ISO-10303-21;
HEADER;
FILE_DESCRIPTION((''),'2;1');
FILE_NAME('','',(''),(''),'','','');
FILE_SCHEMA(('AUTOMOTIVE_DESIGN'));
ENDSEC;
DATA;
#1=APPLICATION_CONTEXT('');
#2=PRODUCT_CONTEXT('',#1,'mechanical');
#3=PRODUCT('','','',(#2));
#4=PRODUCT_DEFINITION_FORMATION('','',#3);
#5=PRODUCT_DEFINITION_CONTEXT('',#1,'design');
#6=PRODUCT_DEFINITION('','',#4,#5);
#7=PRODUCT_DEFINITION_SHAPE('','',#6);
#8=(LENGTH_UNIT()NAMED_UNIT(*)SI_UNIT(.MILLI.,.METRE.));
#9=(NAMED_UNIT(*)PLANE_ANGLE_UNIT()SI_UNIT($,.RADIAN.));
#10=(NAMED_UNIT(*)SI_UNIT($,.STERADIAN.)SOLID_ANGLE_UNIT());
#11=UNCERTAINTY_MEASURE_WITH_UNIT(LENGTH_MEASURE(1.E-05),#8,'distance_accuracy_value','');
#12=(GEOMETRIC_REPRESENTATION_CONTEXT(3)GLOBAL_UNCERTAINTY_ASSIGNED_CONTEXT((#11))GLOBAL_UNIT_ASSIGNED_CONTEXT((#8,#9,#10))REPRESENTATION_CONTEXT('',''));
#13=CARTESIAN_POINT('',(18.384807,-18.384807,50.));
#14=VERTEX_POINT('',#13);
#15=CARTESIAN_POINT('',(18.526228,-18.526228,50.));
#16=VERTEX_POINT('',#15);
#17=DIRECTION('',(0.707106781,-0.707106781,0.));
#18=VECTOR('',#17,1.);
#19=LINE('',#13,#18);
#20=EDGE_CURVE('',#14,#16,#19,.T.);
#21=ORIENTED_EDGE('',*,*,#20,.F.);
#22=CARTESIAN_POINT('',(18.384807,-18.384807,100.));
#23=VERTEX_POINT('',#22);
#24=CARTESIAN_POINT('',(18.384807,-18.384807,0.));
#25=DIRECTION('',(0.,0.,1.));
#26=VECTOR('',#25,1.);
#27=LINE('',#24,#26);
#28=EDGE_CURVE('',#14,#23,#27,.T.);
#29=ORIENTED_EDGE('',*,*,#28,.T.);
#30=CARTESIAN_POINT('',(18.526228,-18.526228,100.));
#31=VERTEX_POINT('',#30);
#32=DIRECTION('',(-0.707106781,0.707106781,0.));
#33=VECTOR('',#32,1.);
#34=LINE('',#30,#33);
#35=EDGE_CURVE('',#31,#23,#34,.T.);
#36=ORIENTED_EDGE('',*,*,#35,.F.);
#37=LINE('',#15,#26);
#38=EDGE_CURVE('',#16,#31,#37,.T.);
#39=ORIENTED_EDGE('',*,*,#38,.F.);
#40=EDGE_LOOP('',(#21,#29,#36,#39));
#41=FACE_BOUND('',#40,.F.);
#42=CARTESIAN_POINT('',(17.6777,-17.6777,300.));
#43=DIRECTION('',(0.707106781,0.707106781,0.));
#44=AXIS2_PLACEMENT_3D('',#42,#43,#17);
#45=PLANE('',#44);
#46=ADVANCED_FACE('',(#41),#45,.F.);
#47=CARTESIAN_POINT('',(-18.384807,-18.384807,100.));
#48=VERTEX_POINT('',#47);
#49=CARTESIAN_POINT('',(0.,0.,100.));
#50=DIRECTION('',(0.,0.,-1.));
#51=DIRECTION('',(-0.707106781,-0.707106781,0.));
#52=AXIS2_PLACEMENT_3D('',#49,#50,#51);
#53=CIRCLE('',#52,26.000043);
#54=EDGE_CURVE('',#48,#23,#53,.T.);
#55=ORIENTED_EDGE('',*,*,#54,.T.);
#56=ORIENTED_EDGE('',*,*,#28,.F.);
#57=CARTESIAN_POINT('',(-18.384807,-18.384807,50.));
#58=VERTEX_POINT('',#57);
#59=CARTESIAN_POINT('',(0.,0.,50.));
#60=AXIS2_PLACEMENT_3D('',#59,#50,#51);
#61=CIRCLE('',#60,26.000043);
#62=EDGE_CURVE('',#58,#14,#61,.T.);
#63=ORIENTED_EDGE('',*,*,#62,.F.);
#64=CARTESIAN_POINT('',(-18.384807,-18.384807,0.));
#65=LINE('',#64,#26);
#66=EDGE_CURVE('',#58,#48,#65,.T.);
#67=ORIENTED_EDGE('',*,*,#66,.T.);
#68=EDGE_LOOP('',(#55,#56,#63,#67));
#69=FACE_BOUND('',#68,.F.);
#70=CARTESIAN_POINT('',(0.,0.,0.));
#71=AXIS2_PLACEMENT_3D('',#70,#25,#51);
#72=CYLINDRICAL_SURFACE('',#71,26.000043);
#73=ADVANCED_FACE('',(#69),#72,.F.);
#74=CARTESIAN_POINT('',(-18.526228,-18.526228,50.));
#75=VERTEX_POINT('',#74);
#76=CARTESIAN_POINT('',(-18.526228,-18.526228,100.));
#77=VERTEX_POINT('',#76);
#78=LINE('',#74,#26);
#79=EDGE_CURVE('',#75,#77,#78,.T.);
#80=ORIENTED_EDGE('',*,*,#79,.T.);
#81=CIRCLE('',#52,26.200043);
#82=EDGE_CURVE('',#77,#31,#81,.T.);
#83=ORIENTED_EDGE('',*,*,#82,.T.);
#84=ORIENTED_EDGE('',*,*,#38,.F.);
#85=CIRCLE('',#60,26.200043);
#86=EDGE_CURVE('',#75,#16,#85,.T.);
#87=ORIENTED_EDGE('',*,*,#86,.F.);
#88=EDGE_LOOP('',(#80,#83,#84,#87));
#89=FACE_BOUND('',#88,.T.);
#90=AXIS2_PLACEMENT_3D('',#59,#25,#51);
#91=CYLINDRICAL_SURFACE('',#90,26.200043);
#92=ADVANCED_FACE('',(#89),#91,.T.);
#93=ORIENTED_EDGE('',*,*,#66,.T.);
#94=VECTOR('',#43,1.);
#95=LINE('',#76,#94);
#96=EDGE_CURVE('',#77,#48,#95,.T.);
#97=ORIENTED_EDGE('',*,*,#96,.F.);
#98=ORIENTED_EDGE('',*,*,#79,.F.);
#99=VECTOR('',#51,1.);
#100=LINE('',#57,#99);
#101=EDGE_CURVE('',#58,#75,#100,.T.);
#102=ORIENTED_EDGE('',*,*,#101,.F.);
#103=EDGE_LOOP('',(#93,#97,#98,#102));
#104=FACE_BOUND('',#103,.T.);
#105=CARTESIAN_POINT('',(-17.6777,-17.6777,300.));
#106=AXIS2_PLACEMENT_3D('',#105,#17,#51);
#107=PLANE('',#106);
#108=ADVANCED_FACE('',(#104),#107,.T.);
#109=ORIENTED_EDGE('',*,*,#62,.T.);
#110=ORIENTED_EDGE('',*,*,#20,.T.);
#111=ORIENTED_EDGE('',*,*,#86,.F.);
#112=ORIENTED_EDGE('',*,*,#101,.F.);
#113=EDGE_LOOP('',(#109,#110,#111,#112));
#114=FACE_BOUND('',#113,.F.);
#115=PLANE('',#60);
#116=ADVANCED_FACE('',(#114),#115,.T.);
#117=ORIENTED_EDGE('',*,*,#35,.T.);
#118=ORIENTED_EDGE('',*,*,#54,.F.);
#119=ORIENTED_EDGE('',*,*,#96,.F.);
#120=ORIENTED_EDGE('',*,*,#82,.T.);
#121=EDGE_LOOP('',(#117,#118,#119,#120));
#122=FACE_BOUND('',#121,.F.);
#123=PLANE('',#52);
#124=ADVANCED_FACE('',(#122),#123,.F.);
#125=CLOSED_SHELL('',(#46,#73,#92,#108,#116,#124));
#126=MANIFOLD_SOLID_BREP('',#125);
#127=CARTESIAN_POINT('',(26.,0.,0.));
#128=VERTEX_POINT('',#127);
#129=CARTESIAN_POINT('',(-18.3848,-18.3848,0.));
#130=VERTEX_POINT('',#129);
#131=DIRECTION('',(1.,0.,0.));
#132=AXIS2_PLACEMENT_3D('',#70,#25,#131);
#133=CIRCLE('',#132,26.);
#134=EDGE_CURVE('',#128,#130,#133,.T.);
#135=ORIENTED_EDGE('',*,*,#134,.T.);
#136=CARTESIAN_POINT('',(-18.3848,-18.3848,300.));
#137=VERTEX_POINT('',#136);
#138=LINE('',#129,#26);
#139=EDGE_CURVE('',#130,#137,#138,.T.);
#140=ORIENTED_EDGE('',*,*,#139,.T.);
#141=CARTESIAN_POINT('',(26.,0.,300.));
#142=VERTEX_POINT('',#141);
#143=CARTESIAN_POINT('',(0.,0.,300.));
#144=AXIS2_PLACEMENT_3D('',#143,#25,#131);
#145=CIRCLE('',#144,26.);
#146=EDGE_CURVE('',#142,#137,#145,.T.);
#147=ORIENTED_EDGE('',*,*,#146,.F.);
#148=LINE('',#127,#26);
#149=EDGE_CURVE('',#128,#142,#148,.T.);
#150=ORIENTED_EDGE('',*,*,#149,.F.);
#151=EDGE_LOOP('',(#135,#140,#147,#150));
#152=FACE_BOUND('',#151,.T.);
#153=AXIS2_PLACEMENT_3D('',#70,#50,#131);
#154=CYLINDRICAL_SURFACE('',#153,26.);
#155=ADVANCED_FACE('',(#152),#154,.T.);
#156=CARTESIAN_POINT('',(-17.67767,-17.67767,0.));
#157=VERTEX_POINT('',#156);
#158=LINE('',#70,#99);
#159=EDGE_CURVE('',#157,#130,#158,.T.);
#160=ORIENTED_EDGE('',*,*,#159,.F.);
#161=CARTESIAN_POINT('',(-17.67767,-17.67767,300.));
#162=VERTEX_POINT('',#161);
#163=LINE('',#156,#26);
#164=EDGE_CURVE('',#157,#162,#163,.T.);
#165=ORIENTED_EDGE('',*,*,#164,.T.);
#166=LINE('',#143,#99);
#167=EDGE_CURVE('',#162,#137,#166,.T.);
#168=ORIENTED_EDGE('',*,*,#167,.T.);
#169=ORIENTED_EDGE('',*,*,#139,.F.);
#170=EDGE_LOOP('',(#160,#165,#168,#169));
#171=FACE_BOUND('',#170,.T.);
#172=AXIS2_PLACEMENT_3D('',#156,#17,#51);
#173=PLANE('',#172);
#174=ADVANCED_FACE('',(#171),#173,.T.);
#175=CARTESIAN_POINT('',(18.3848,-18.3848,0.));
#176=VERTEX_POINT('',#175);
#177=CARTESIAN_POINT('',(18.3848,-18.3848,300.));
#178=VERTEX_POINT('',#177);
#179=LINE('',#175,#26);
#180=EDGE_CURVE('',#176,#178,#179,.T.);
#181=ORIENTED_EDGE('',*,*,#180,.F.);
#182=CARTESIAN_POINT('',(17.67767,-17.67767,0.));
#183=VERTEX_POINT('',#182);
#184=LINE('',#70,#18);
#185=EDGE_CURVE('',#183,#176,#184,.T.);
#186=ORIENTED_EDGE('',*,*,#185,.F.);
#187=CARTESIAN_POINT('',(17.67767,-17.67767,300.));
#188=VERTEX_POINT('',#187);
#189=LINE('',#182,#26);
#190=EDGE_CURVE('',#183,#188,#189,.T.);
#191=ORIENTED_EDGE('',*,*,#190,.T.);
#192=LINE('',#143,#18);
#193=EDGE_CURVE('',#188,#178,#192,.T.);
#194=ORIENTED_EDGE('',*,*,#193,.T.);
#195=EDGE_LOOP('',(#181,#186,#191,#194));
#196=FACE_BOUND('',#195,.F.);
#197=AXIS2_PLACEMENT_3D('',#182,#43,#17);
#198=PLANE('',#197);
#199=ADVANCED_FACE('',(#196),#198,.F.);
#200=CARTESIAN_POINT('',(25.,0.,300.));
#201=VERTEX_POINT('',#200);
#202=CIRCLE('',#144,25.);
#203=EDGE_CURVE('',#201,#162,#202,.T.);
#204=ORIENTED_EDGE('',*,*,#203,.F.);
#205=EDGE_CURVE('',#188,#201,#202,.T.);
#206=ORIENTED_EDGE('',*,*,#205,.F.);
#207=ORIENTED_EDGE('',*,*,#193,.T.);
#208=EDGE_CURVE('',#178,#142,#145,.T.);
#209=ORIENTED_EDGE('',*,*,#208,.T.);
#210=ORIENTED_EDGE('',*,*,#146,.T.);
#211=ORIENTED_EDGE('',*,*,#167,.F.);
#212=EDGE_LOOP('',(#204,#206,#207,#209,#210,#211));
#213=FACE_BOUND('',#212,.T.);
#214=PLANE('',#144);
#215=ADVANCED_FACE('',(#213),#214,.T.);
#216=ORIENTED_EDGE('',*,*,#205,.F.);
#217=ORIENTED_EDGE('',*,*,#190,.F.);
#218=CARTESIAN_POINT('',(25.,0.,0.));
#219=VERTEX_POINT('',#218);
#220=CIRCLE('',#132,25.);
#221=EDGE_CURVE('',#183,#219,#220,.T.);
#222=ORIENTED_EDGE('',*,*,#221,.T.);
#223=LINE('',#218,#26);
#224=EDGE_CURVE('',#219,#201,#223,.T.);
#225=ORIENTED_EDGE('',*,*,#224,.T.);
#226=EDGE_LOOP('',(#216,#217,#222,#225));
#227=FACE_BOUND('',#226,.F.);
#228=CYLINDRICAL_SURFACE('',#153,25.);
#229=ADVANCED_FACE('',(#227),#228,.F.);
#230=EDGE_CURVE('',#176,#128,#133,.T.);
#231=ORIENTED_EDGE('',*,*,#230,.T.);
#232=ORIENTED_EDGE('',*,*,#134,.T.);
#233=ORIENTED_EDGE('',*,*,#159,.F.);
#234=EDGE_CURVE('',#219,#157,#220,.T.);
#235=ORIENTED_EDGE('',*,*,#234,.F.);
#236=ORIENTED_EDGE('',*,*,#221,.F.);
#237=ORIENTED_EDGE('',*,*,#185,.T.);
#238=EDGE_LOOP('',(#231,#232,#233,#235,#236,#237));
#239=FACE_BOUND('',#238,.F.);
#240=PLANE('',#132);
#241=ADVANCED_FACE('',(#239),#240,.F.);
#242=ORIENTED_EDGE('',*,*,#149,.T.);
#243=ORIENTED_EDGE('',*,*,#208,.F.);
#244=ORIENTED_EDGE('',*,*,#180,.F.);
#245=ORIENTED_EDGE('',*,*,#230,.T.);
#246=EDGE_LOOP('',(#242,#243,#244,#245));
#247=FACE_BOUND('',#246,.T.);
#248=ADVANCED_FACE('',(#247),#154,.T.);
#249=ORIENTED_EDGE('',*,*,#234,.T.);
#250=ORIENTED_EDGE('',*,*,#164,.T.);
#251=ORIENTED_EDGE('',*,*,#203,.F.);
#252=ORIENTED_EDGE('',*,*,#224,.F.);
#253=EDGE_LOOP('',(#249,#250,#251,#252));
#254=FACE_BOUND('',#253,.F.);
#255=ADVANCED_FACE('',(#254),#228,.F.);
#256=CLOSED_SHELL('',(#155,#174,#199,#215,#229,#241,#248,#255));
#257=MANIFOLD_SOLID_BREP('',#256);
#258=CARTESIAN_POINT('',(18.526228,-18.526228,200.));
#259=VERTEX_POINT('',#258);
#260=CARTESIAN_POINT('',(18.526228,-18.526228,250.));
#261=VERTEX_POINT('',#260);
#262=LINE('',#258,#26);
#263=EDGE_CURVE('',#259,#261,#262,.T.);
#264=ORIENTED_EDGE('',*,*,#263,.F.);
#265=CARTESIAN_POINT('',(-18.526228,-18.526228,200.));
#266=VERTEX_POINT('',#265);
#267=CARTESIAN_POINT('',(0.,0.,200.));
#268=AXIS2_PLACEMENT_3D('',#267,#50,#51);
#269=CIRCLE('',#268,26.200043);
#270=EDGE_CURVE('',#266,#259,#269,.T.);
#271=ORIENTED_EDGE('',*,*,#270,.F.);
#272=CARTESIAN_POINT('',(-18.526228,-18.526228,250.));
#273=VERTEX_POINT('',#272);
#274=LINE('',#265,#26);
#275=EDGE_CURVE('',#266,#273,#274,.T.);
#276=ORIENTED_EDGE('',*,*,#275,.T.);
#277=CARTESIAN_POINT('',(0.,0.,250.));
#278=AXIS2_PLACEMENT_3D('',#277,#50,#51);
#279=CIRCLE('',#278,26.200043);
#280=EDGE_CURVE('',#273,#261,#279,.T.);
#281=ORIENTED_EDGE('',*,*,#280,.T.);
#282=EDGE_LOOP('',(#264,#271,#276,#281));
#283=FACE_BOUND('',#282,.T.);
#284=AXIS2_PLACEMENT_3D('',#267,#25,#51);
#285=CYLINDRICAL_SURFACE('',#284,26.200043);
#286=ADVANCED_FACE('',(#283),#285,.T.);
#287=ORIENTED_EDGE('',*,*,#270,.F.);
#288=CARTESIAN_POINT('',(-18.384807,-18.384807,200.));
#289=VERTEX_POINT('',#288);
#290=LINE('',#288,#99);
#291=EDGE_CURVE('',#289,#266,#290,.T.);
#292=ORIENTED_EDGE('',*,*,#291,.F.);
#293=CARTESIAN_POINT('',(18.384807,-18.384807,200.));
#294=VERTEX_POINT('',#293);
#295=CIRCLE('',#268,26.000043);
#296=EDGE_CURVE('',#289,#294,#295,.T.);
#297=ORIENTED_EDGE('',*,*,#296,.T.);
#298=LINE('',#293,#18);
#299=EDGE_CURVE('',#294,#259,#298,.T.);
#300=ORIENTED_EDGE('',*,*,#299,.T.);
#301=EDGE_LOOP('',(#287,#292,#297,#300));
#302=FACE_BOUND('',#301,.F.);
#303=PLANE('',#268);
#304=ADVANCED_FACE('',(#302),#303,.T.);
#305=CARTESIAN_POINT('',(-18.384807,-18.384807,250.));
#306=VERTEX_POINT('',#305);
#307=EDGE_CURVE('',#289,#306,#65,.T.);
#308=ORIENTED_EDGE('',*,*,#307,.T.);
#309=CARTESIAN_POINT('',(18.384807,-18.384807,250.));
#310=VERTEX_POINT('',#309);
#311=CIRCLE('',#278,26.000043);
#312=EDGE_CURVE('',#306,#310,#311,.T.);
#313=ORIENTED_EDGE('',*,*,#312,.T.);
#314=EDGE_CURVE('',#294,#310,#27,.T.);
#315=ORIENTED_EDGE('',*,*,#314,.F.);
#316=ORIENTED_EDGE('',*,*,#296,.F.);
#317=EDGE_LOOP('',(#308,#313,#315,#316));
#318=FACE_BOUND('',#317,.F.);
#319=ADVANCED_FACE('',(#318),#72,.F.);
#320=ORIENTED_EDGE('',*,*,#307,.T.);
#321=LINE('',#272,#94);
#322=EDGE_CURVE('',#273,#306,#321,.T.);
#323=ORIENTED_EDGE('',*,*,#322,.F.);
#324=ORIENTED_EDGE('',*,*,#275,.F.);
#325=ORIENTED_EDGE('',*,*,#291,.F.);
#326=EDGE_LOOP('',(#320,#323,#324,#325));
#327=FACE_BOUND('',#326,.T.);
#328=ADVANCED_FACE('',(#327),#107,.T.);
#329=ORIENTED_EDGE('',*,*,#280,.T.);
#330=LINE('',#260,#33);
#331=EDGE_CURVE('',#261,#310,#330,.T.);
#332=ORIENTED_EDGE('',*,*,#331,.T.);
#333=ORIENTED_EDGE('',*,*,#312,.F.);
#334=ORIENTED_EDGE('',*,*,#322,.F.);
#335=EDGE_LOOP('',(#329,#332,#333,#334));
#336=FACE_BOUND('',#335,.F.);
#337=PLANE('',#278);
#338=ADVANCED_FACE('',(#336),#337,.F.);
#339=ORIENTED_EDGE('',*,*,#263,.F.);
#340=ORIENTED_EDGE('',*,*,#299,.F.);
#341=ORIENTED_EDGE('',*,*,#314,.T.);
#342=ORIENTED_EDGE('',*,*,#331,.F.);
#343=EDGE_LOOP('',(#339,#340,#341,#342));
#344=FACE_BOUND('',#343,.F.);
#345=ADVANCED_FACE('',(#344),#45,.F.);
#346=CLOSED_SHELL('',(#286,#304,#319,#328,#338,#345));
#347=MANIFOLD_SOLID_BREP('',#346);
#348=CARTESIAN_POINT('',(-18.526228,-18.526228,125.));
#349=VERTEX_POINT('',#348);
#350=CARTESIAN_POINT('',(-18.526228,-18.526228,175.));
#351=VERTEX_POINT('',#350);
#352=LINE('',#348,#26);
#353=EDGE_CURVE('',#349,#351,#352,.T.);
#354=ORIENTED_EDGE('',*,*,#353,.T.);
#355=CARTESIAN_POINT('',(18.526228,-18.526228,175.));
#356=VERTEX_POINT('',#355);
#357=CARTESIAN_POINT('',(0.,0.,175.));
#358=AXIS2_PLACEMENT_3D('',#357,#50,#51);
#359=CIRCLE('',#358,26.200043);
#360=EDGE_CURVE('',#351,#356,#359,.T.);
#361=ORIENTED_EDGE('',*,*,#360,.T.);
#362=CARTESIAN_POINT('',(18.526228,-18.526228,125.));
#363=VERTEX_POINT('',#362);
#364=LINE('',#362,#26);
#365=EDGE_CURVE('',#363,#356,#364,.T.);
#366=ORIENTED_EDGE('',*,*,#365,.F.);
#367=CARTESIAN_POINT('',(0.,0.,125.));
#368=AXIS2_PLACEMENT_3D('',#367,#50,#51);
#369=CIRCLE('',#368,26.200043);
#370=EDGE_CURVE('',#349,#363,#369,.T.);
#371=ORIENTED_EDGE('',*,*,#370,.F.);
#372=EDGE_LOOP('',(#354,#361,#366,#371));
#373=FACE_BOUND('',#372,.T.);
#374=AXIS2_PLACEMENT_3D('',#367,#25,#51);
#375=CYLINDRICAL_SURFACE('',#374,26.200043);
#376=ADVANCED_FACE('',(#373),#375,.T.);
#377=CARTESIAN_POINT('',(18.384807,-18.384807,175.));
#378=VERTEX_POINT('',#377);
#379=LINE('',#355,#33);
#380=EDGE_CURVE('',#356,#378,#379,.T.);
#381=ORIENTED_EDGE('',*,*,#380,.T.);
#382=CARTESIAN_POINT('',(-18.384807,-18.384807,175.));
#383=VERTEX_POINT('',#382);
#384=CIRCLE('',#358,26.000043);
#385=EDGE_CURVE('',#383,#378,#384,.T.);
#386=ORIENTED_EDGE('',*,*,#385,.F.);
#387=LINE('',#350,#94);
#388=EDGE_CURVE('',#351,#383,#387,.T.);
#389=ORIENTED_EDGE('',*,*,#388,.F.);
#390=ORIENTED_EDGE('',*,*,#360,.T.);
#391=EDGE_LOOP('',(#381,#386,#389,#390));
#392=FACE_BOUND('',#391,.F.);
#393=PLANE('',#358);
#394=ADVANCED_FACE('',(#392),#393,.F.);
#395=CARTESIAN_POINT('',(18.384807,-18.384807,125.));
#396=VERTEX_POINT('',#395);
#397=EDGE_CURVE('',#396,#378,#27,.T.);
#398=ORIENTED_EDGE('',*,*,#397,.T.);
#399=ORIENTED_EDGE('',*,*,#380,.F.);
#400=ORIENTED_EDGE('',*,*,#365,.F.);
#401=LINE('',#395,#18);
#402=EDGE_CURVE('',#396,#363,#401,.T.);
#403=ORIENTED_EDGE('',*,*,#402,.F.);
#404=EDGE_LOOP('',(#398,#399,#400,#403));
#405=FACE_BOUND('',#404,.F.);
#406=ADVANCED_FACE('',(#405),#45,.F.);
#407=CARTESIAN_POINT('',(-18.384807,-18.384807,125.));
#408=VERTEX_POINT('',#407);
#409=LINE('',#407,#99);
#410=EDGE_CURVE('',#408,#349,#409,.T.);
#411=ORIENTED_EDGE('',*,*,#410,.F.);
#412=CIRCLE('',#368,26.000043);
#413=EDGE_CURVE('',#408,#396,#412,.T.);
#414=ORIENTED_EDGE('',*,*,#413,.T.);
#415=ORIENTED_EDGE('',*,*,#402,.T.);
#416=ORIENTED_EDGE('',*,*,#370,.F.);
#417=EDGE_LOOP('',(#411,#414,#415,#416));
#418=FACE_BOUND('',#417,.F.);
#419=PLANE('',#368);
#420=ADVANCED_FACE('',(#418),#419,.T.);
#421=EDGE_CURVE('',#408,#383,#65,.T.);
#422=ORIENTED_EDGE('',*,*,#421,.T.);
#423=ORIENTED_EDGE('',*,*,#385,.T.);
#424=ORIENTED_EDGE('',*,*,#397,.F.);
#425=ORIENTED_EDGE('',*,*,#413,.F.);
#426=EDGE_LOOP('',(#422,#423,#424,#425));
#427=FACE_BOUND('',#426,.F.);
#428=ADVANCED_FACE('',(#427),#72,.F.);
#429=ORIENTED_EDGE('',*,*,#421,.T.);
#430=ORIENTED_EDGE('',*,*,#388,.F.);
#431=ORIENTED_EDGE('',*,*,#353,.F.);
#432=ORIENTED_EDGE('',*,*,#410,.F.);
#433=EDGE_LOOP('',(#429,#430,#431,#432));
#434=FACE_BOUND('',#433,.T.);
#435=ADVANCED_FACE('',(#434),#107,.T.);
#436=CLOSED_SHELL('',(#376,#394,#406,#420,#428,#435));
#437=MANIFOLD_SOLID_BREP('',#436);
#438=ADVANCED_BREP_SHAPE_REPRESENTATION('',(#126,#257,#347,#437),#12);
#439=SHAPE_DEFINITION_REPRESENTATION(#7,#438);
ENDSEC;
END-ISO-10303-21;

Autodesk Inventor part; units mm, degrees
ref_plane "YZ Plane" through (0, 0, 0) normal (1, 0, 0) x (0, 1, 0)
ref_plane "XZ Plane" through (0, 0, 0) normal (0, 1, 0) x (-1, 0, 0)
ref_plane "XY Plane" through (0, 0, 0) normal (0, 0, 1) x (1, 0, 0)
sketch "Base" plane through (0, 0, 0) normal (0, 0, 1) x (1, 0, 0)
  circle A0 centre (0, 0) radius 25
  circle A1 centre (0, 0) radius 26
  line L0 (0, 0) -> (-18.3848, -18.3848)
  line L1 (0, -36.4) -> (0, 36.4) construction
  line L2 (0, 0) -> (18.3848, -18.3848)
  point P0 (17.6777, -17.6777)
  point P1 (18.3848, -18.3848)
  point P2 (-17.6777, -17.6777)
  dimension "d1" = 52
  dimension "d0" = 50
  dimension "d4" = 45
extrude "Corpo" add sketch "Base" along normal blind 300 contours A0 L0 A1 L2 picked at (-19.4545, -16.4764)
sketch "FolhaAluminio" plane through (-17.6777, -17.6777, 300) normal (0.7071068, -0.7071068, 0) x (-0.7071068, -0.7071068, 0)
  line L0 (-51, 300) -> (1, 300) projected
  line L1 (1, 300) -> (1, 250) construction
  line L2 (1, 300) -> (1, 0) projected
  line L3 (1, 250) -> (1.2, 250)
  line L4 (1.2, 250) -> (1.2, 200)
  line L5 (1.2, 200) -> (1, 200)
  line L6 (1, 200) -> (1, 250)
  line L7 (1, 200) -> (1, 175) construction
  line L8 (1, 175) -> (1.2, 175)
  line L9 (1.2, 175) -> (1.2, 125)
  line L10 (1.2, 125) -> (1, 125)
  line L11 (1, 125) -> (1, 175)
  line L12 (1, 125) -> (1, 100) construction
  line L13 (1, 100) -> (1.2, 100)
  line L14 (1.2, 100) -> (1.2, 50)
  line L15 (1.2, 50) -> (1, 50)
  line L16 (1, 50) -> (1, 100)
  line L17 (-25, 360) -> (-25, -60) projected
  point P0 (-25, 300)
  point P1 (1, 200)
  point P2 (1, 125)
  point P3 (1, 50)
  dimension "d5" = 50
  dimension "d6" = 0.2
  dimension "d7" = 50
  dimension "d8" = 25
  dimension "d9" = 0.2
  dimension "d10" = 50
  dimension "d11" = 25
  dimension "d12" = 0.2
  dimension "d13" = 50
revolve "Folhas" add sketch "FolhaAluminio" angle 270 about axis through (0, 0, -10) along (0, 0, -1) separate body
properties part number "Cano"
